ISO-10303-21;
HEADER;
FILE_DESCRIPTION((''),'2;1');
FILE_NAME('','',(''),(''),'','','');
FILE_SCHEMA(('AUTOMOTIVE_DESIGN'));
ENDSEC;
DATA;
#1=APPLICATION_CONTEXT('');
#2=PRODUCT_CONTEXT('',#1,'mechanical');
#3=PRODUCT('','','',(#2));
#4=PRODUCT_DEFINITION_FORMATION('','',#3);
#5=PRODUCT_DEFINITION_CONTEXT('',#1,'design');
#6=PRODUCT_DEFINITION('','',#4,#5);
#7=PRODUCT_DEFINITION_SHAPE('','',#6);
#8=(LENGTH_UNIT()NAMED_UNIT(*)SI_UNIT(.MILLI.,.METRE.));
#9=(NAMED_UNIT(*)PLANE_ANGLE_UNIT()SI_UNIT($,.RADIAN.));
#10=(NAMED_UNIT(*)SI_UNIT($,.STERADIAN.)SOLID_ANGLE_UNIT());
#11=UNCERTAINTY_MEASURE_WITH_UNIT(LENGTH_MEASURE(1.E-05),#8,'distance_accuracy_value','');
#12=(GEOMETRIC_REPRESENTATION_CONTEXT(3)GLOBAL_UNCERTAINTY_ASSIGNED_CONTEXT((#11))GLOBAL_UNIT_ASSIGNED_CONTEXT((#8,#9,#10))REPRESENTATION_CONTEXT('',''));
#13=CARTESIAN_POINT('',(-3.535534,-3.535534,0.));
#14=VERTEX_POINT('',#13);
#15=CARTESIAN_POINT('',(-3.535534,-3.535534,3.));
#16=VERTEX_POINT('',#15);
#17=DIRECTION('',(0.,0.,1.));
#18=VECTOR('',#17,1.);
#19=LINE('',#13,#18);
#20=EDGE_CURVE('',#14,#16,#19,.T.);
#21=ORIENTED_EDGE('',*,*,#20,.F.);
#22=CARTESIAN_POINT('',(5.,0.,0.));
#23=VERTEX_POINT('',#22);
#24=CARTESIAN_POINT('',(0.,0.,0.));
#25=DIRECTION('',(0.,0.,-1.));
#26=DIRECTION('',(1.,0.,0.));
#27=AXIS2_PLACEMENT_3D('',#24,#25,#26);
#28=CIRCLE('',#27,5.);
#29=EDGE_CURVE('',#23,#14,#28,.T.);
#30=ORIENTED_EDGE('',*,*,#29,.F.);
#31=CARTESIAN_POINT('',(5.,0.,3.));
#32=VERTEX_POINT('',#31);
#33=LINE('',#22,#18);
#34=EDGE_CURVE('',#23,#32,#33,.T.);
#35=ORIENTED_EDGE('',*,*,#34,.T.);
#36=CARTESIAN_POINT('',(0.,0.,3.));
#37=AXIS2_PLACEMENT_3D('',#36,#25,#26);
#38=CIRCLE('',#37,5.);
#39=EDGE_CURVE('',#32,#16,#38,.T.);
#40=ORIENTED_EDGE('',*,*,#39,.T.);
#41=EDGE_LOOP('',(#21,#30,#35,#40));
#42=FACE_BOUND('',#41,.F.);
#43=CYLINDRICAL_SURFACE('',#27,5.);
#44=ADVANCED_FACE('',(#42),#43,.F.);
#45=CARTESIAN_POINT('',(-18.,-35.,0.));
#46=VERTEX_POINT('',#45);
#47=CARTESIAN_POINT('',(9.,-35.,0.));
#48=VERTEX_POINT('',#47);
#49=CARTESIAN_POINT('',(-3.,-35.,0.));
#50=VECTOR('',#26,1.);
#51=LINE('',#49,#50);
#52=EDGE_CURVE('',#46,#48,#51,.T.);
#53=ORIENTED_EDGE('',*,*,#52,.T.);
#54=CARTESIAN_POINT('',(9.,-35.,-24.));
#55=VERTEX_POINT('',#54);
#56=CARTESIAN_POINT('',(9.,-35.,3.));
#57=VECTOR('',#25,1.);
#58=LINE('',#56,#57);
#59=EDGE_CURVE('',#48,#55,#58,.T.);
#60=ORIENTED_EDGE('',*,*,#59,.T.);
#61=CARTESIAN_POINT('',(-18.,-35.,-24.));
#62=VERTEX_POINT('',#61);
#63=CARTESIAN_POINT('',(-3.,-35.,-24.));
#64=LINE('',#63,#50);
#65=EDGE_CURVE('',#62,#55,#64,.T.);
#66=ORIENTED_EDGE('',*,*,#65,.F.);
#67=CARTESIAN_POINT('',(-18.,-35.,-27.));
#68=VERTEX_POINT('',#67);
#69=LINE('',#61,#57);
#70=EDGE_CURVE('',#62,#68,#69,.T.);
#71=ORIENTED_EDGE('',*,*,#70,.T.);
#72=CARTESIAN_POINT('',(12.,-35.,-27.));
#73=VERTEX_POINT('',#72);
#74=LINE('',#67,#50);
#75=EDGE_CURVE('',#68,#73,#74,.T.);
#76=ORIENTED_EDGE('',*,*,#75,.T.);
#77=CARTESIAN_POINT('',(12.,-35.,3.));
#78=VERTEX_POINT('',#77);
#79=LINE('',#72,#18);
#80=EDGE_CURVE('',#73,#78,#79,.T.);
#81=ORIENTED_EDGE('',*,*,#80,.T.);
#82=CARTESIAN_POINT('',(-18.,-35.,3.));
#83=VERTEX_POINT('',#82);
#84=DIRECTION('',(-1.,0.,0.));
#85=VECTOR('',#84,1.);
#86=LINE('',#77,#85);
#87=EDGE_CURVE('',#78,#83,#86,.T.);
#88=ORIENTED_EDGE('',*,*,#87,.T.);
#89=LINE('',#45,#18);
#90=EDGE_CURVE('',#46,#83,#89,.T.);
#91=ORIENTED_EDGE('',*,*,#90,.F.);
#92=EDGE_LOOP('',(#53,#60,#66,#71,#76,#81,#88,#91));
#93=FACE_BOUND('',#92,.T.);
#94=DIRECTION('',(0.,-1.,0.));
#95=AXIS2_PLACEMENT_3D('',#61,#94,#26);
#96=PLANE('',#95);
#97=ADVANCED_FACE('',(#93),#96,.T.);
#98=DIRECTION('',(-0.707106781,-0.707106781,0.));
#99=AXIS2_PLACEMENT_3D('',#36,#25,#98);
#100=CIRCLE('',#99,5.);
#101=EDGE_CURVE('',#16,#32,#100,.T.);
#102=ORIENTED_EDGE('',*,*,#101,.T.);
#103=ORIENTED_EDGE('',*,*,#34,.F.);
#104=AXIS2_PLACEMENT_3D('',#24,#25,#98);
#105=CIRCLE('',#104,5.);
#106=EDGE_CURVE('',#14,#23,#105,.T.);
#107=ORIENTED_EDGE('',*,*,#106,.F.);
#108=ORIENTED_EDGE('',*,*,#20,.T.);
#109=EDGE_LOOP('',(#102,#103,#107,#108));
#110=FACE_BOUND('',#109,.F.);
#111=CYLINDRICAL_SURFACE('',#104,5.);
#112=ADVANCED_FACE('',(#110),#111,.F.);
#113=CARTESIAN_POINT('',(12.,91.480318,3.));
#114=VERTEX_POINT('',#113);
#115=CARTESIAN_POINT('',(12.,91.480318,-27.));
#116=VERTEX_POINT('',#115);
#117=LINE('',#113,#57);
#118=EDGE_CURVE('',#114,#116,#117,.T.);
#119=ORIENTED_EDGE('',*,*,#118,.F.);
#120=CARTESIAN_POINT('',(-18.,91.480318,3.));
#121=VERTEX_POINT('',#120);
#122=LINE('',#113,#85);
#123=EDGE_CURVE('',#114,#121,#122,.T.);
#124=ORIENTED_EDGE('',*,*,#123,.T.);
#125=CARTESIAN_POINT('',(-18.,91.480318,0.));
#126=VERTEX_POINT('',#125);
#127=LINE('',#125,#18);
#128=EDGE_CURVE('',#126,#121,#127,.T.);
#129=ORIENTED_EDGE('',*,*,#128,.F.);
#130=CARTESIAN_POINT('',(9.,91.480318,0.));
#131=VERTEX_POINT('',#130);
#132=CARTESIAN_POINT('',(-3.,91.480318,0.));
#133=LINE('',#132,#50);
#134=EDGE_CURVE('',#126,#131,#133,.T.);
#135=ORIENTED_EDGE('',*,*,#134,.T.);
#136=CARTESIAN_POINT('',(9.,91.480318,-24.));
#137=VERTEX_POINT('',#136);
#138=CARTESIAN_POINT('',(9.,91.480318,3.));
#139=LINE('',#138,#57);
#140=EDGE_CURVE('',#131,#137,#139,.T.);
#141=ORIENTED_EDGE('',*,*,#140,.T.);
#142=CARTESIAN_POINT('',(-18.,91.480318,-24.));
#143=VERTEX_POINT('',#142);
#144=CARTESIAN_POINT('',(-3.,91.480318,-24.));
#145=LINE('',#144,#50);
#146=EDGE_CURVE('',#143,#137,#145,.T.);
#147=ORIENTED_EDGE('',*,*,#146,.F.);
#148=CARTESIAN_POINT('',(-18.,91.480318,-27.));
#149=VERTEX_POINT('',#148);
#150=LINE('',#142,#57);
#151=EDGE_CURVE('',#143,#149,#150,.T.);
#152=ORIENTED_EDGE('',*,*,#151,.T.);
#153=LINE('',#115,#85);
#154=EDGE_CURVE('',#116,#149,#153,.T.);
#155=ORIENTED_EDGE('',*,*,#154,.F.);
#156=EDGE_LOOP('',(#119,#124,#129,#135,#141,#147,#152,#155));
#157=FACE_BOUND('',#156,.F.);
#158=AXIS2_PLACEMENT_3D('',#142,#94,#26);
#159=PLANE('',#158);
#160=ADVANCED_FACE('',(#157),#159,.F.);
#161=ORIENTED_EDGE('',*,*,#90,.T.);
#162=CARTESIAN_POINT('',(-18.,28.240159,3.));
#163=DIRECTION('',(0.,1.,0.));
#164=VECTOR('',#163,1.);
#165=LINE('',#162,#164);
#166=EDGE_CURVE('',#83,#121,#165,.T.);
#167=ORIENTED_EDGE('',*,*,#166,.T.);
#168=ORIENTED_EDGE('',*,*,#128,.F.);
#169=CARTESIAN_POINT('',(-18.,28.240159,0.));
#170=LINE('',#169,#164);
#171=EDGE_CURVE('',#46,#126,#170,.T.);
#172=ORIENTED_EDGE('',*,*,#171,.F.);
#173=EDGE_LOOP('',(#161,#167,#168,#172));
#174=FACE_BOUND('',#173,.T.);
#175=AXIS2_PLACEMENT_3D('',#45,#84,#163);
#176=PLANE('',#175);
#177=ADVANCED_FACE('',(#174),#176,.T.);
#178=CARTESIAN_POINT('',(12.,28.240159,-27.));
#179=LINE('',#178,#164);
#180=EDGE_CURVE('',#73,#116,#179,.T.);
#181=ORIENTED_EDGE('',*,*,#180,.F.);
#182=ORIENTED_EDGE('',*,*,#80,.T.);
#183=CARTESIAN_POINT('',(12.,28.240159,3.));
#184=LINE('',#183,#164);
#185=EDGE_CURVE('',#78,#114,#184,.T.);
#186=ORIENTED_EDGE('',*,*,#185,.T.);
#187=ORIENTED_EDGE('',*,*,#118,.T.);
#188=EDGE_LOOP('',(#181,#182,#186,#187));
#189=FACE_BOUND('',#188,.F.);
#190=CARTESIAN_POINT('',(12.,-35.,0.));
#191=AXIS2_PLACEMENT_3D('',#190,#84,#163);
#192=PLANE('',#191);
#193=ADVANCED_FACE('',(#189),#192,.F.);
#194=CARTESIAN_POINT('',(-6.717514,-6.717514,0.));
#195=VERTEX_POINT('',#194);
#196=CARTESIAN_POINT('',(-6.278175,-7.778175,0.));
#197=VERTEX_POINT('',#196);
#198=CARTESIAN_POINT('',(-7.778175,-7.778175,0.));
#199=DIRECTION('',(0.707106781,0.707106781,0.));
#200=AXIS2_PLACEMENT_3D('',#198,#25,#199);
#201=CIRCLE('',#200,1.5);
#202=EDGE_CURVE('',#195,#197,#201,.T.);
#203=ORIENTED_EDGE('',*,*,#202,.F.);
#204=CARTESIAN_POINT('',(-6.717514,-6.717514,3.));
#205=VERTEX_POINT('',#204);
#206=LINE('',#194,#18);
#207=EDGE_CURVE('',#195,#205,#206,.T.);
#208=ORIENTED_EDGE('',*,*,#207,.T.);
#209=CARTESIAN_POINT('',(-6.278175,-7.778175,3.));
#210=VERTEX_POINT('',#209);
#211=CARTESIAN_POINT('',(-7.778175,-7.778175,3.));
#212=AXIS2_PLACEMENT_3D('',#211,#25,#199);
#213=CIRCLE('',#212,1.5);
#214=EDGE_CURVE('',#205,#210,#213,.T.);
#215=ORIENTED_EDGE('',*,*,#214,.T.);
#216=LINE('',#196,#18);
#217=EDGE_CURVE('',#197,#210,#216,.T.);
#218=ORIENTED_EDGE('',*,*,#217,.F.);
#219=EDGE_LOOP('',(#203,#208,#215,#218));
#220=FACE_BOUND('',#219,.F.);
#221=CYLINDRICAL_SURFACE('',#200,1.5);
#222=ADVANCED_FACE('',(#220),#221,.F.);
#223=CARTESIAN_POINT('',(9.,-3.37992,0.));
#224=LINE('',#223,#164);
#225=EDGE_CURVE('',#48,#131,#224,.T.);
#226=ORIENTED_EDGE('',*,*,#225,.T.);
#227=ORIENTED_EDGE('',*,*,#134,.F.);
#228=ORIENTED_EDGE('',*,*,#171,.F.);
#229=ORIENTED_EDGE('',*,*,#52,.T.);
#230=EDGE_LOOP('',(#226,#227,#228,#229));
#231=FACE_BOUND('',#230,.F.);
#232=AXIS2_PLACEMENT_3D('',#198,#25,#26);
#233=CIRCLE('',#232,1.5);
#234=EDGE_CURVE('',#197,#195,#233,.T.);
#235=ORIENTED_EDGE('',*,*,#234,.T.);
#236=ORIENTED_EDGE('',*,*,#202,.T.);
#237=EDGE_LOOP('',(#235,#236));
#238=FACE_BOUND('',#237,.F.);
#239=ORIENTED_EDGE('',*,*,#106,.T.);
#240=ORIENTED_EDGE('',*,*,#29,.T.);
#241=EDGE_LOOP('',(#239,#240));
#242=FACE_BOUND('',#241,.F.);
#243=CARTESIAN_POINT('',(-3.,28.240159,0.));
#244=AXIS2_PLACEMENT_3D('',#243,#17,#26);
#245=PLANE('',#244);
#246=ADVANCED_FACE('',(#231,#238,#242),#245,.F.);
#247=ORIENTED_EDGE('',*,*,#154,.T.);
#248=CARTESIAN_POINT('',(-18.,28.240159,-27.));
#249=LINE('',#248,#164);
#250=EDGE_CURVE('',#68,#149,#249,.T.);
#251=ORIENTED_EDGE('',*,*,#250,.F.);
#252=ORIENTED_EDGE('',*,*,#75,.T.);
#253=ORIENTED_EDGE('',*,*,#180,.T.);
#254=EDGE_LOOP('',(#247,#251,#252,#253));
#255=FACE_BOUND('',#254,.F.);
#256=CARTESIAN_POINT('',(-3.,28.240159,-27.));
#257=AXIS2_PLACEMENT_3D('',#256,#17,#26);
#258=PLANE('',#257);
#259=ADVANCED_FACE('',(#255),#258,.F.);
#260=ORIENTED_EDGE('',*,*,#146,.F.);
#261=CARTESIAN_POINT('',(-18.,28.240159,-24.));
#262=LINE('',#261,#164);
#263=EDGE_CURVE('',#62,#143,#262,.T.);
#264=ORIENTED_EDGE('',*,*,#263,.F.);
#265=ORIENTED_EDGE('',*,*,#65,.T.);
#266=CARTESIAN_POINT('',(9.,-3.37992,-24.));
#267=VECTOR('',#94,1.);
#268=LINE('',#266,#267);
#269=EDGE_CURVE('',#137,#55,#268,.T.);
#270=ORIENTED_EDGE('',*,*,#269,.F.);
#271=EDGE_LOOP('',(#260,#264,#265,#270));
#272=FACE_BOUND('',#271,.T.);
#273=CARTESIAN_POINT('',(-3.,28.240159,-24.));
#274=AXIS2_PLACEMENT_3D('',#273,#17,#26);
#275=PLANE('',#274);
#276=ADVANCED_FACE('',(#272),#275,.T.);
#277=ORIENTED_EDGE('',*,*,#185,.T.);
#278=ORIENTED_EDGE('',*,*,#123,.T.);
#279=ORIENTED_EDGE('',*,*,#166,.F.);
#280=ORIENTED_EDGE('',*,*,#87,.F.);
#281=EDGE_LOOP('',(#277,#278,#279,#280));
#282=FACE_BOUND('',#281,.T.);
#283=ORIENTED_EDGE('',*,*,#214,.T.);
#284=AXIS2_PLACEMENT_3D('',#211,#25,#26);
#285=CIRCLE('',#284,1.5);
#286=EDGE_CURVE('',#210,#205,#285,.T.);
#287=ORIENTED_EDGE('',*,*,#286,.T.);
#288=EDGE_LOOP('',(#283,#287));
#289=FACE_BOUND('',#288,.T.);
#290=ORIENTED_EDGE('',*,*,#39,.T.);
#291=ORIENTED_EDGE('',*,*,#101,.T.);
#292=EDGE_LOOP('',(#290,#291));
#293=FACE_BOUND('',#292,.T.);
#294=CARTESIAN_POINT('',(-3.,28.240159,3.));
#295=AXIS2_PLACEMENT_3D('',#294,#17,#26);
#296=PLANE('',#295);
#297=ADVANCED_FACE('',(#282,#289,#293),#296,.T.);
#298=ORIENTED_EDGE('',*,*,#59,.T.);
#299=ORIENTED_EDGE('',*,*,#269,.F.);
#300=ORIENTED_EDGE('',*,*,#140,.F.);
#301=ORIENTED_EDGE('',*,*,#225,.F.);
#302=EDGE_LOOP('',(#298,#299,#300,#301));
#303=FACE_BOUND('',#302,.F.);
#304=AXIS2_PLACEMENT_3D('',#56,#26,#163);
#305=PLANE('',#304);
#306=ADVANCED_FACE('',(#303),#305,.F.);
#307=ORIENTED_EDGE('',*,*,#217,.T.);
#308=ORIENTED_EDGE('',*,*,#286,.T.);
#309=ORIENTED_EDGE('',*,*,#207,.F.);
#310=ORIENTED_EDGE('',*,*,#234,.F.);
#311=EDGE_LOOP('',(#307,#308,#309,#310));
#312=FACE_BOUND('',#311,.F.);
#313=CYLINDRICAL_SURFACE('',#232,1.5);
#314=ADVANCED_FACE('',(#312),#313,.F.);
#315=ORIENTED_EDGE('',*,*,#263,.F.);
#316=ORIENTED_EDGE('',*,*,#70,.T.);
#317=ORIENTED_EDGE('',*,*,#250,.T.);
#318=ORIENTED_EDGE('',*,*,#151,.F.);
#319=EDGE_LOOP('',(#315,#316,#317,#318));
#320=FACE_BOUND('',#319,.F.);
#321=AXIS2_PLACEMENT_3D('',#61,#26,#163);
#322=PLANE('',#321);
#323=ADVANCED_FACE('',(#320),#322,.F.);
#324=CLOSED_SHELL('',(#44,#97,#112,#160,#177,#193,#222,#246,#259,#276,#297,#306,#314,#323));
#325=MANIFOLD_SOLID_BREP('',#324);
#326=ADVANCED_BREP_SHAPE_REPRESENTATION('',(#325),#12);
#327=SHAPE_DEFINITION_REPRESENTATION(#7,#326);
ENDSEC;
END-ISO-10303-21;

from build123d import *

# Parameters (mm, degrees)
F0_W     = 30
F0_H     = 126.4803184569
F1_DEPTH = 3
F2_W     = 3
F2_H     = 126.4803184569
F3_DEPTH = 30
F4_START = -24
F4_DEPTH = 3


with BuildPart() as f1:
    # F0 (on Top) → F1 (new body)
    with BuildSketch(Plane.XY):
        with Locations((-3, 28.2401592284)):
            Rectangle(F0_W, F0_H)
        with BuildLine():
            ThreePointArc((-6.2781745931, -7.7781745931), (-9.1639938918, -8.3521997416), (-6.7175144213, -6.7175144213))
            ThreePointArc((-6.7175144213, -6.7175144213), (-6.3923552943, -7.2041494445), (-6.2781745931, -7.7781745931))
        make_face(mode=Mode.SUBTRACT)
        with BuildLine():
            ThreePointArc((-3.5355339059, -3.5355339059), (-1.9134171618, 4.6193976626), (5, 0))
            ThreePointArc((5, 0), (1.9134171618, -4.6193976626), (-3.5355339059, -3.5355339059))
        make_face(mode=Mode.SUBTRACT)
    extrude(amount=F1_DEPTH)

    # F2 (on face) → F3 (join)
    with BuildSketch(Plane.XY.offset(3)):
        with Locations((10.5, 28.2401592284)):
            Rectangle(F2_W, F2_H)
    extrude(amount=-F3_DEPTH)

    # F0 (on Top) → F4 (join)
    with BuildSketch(Plane.XY.offset(F4_START)):
        with Locations((-3, 28.2401592284)):
            Rectangle(F0_W, F0_H)
        with BuildLine():
            ThreePointArc((-6.2781745931, -7.7781745931), (-9.1639938918, -8.3521997416), (-6.7175144213, -6.7175144213))
            ThreePointArc((-6.7175144213, -6.7175144213), (-6.3923552943, -7.2041494445), (-6.2781745931, -7.7781745931))
        make_face(mode=Mode.SUBTRACT)
        with BuildLine():
            ThreePointArc((-3.5355339059, -3.5355339059), (-1.9134171618, 4.6193976626), (5, 0))
            ThreePointArc((5, 0), (1.9134171618, -4.6193976626), (-3.5355339059, -3.5355339059))
        make_face(mode=Mode.SUBTRACT)
        with BuildLine():
            ThreePointArc((-3.5355339059, -3.5355339059), (1.9134171618, -4.6193976626), (5, 0))
            ThreePointArc((5, 0), (-1.9134171618, 4.6193976626), (-3.5355339059, -3.5355339059))
        make_face()
        with BuildLine():
            ThreePointArc((-6.2781745931, -7.7781745931), (-6.3923552943, -7.2041494445), (-6.7175144213, -6.7175144213))
            ThreePointArc((-6.7175144213, -6.7175144213), (-9.1639938918, -8.3521997416), (-6.2781745931, -7.7781745931))
        make_face()
    extrude(amount=-F4_DEPTH)


solid = f1.part
